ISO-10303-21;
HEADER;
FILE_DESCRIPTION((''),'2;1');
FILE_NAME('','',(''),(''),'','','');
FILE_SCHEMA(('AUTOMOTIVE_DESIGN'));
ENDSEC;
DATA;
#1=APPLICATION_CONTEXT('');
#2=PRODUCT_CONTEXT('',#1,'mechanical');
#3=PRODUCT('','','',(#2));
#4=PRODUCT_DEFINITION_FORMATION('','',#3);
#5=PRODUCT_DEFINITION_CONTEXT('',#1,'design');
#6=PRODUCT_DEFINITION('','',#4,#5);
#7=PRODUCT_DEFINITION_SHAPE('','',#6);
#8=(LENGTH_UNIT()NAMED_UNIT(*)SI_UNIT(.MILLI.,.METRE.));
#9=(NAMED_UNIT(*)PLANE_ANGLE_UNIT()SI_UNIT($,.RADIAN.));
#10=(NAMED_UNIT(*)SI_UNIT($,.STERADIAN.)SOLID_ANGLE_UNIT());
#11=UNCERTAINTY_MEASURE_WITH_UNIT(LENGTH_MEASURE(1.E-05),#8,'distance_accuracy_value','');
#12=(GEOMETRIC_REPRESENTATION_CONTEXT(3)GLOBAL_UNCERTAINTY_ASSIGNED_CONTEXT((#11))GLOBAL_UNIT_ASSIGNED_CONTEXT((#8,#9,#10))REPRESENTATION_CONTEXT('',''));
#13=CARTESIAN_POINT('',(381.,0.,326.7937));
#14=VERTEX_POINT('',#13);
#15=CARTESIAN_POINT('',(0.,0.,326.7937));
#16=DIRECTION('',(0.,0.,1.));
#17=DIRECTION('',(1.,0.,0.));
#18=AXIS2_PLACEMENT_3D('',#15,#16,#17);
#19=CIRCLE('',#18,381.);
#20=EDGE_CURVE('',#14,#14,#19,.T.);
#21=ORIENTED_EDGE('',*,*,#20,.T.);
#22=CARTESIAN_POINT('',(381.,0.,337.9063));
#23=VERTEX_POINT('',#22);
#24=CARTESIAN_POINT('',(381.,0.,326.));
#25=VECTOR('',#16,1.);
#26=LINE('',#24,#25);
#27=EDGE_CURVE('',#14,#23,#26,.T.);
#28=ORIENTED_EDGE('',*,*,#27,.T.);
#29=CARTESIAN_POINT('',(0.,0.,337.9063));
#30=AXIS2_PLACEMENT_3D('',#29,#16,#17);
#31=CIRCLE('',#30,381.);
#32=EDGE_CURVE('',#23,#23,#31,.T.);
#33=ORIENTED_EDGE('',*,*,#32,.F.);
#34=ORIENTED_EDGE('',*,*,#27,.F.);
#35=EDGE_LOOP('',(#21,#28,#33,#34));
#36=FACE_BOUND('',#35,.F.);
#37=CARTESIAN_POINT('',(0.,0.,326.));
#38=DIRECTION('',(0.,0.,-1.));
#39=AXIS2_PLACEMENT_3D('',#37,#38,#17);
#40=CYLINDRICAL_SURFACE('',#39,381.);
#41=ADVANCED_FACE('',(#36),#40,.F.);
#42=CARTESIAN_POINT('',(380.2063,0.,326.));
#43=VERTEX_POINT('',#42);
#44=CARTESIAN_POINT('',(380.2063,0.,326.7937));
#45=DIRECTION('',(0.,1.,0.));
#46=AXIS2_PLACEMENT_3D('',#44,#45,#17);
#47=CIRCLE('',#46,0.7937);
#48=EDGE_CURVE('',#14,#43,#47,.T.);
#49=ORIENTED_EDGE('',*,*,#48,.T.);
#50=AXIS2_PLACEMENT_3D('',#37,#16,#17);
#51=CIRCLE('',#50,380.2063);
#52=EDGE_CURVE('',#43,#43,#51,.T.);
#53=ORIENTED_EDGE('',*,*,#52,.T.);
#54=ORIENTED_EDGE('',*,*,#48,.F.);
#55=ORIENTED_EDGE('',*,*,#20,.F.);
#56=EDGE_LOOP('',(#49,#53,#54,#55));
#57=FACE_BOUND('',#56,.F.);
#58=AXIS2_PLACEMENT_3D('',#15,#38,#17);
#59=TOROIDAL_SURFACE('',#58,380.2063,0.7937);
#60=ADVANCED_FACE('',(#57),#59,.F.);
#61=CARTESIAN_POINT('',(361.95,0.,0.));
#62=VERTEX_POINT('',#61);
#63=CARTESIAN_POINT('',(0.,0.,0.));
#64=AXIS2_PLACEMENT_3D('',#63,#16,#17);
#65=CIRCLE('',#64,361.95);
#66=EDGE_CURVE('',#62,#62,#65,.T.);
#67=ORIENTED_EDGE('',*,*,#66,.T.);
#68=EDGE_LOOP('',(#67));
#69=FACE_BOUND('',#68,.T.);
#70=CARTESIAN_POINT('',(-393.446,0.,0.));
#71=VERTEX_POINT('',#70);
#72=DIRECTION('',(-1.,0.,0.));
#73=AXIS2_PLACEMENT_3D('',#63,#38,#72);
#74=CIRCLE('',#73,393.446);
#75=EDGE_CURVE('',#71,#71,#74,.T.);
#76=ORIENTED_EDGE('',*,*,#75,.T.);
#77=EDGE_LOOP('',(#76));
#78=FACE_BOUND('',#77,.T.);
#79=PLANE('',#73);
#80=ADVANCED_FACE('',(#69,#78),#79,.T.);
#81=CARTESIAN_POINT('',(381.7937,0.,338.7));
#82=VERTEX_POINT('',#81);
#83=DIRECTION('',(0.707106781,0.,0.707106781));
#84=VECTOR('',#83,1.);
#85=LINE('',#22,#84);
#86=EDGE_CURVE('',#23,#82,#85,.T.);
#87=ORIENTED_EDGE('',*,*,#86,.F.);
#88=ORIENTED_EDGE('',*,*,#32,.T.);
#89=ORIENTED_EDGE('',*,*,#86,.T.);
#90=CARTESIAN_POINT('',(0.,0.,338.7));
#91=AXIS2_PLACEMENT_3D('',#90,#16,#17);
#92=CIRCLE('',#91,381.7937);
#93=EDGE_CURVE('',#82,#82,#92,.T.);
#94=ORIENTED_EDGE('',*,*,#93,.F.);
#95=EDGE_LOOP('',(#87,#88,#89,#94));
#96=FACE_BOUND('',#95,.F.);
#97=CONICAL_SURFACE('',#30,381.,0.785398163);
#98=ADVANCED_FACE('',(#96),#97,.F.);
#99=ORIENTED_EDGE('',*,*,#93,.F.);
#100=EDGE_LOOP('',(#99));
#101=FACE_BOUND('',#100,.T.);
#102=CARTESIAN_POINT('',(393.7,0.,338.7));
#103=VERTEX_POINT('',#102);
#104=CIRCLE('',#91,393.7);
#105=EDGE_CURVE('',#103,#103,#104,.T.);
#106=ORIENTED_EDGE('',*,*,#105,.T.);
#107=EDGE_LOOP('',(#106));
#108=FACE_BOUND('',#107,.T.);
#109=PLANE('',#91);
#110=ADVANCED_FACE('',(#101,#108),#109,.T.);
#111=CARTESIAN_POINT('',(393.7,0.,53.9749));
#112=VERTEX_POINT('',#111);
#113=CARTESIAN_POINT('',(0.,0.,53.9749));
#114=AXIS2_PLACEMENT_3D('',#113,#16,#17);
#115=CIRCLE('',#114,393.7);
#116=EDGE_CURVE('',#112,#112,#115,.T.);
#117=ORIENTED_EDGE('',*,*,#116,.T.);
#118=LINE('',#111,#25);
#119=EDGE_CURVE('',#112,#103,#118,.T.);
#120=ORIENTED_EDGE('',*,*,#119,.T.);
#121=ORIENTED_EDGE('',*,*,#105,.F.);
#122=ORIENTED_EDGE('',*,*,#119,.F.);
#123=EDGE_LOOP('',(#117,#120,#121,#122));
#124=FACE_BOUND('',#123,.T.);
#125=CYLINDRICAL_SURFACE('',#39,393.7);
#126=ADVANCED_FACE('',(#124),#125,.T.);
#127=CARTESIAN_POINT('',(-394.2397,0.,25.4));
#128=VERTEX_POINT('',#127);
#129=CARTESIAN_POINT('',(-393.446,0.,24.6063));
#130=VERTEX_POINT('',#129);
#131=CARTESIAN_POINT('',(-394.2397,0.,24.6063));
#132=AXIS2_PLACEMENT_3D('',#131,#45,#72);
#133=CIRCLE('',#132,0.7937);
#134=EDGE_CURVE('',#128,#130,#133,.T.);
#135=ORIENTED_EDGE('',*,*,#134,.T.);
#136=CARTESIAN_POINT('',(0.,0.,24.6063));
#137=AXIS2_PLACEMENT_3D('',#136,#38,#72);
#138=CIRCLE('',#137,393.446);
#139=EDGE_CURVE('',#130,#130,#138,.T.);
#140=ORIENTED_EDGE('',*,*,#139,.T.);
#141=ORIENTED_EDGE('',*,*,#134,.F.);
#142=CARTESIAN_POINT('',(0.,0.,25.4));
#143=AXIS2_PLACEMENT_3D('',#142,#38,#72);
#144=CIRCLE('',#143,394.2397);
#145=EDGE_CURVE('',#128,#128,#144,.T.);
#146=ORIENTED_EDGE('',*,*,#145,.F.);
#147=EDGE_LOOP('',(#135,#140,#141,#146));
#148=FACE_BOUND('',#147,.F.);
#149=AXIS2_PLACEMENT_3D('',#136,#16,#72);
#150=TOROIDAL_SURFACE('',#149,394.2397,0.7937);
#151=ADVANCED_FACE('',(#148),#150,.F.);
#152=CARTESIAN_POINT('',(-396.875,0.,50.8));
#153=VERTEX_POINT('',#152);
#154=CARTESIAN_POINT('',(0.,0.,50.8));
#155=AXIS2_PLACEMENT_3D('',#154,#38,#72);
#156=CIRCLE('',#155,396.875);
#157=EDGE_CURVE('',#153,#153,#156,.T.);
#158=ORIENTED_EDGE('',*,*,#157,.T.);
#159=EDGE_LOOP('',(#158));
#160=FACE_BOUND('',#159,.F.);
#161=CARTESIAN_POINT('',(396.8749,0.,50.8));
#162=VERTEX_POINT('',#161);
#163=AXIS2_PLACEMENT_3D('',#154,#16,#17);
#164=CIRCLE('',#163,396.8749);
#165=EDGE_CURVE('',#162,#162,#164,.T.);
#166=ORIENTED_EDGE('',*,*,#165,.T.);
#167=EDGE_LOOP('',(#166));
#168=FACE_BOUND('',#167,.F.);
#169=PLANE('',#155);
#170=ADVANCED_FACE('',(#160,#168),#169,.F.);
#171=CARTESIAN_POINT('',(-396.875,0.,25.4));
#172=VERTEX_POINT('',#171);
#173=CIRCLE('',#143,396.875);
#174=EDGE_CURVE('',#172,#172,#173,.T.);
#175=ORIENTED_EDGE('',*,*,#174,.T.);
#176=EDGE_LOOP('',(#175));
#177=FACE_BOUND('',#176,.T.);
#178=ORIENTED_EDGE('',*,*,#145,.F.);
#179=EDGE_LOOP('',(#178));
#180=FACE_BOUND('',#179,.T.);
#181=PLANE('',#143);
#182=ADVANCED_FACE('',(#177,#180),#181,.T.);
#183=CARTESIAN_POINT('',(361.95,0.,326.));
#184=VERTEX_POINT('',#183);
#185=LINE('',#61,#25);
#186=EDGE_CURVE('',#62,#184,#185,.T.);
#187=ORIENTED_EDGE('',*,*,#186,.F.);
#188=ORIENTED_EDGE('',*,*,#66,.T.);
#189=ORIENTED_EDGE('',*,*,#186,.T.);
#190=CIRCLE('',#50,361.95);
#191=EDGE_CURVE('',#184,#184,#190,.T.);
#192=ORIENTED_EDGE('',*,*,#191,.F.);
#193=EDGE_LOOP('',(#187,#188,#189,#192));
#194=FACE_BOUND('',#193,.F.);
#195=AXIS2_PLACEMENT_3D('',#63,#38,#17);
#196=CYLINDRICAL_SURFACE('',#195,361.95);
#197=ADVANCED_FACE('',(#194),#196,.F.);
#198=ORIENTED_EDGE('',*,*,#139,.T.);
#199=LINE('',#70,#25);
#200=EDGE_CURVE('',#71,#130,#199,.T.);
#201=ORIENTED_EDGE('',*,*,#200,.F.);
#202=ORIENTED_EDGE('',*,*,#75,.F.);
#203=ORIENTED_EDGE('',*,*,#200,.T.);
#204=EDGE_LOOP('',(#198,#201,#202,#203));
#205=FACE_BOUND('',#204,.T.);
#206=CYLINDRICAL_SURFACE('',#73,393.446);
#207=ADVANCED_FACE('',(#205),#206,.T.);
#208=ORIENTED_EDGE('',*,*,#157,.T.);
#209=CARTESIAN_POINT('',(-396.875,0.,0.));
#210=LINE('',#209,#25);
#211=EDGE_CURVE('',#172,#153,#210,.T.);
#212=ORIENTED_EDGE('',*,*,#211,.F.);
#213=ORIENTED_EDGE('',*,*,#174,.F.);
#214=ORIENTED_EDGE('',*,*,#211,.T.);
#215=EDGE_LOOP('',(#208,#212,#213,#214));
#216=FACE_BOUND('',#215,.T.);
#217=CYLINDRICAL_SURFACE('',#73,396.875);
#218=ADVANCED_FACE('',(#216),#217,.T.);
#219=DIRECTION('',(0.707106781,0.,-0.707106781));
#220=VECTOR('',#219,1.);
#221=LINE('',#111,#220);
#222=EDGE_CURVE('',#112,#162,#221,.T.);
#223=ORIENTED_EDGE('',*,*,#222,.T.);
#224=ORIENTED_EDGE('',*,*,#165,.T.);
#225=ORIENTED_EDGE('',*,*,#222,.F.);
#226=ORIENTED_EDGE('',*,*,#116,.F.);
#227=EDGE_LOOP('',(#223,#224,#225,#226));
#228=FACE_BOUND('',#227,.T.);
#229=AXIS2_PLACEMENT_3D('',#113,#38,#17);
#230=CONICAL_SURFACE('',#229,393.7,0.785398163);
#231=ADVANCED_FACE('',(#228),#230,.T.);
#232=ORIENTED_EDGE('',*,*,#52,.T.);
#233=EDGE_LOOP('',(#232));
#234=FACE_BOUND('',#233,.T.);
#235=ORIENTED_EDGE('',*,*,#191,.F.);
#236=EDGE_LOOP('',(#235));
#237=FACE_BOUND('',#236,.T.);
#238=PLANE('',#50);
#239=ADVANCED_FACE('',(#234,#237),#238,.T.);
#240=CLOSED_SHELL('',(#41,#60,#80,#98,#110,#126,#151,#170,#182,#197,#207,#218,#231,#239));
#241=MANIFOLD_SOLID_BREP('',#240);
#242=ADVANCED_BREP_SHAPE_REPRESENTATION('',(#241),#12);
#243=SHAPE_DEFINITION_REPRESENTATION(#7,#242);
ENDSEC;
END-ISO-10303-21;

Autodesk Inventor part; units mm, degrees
ref_plane "YZ Plane" through (0, 0, 0) normal (1, 0, 0) x (0, 1, 0)
ref_plane "XZ Plane" through (0, 0, 0) normal (0, 1, 0) x (-1, 0, 0)
ref_plane "XY Plane" through (0, 0, 0) normal (0, 0, 1) x (1, 0, 0)
sketch "Sketch1" plane through (0, 0, 0) normal (0, 0, 1) x (1, 0, 0)
  circle A0 centre (0, 0) radius 361.95
  circle A1 centre (0, 0) radius 393.7
  dimension "d0" = 723.9
  dimension "d1" = 787.4
extrude "Extrusion1" add sketch "Sketch1" along normal blind 326
sketch "Sketch2" plane through (0, 0, 0) normal (0, 0, -1) x (-1, 0, 0)
  circle A0 centre (0, 0) radius 396.875
  circle A1 centre (0, 0) radius 393.7 projected
  dimension "d4" = 793.75
extrude "Extrusion2" add sketch "Sketch2" against normal blind 50.8
sketch "Sketch3" plane through (0, 0, 0) normal (0, 0, -1) x (-1, 0, 0)
  circle A0 centre (0, 0) radius 396.875 projected
  circle A1 centre (0, 0) radius 393.446
  dimension "d7" = 786.892
extrude "Extrusion3" cut sketch "Sketch3" against normal blind 25.4
chamfer "Chamfer1" distance 3.175 angle 45 1 edges at (-393.7, 0, 50.8)
sketch "Sketch4" plane through (0, 0, 326) normal (0, 0, 1) x (1, 0, 0)
  circle A0 centre (0, 0) radius 381
  circle A1 centre (0, 0) radius 393.7 projected
  dimension "d13" = 762
extrude "Extrusion4" add sketch "Sketch4" along normal blind 12.7
fillet "Fillet1" radius 0.7937 2 edges at (-381, 0, 326) (393.446, 0, 25.4)
chamfer "Chamfer2" distance 0.7937 angle 45 1 edges at (-381, 0, 338.7)
equation "\"d10\" = -0.5 * d1 + 0.5 * d4"
properties part number "A1-19027-400-08 HCWI liner - pup" material "Iron, HCWI"
